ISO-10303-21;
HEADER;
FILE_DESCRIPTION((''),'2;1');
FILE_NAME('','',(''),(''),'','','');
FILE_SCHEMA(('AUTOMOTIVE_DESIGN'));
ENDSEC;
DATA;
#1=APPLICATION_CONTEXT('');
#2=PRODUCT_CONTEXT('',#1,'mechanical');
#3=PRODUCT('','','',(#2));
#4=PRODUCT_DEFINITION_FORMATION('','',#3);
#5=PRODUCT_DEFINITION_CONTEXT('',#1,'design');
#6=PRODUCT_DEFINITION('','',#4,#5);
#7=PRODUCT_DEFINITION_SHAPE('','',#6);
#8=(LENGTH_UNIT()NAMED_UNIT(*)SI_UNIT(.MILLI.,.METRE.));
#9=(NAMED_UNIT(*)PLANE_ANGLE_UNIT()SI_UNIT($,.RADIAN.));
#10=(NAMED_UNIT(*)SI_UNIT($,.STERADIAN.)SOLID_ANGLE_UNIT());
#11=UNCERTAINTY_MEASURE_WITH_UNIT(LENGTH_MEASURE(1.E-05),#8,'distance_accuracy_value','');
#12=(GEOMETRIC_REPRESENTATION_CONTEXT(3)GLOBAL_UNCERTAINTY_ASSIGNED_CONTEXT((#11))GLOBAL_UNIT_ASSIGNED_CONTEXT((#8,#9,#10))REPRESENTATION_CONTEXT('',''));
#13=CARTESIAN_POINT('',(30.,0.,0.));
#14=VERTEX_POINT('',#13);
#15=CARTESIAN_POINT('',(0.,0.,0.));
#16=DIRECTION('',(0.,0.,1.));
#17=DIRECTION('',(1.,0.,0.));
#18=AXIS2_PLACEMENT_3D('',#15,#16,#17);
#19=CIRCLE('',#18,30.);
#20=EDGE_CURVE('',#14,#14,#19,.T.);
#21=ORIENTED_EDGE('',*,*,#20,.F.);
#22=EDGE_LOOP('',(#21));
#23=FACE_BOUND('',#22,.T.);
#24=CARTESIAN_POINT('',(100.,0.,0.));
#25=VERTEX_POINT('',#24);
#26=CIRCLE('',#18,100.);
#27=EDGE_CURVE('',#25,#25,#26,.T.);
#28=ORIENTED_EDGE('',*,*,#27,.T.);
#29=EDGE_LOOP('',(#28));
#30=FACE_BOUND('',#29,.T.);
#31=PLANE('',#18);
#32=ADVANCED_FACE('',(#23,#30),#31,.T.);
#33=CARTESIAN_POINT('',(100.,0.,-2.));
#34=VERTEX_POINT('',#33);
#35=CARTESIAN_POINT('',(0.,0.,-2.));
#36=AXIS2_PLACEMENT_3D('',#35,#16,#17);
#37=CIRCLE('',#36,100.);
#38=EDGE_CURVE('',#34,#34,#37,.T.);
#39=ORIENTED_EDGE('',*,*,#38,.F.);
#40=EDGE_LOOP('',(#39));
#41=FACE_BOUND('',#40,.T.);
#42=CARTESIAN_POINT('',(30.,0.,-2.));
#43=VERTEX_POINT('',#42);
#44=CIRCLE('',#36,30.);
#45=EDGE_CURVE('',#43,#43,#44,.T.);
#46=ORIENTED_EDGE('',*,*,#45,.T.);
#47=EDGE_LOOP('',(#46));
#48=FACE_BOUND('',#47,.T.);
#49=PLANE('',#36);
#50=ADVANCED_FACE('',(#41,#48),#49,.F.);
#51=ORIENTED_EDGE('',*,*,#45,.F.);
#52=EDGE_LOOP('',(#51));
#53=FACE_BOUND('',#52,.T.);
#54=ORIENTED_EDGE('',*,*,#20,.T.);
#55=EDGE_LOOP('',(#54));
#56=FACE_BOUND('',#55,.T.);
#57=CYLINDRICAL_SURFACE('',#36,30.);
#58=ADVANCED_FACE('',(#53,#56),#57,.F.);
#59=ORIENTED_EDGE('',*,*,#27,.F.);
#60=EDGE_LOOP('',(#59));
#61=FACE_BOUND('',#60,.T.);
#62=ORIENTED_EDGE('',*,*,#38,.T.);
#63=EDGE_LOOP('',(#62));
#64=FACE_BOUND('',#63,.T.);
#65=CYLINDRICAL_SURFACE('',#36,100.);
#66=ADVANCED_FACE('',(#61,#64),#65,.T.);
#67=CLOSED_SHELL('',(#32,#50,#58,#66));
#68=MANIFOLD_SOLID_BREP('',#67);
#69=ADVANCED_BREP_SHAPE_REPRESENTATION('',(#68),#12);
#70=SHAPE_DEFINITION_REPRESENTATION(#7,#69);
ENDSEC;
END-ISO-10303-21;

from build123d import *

# Parameters (mm, degrees)
SKETCH1_R          = 100
SKETCH1_R_2        = 30
BASE_FLANGE1_DEPTH = 2


# Sheet-metal steps are written as plain solids
with BuildPart() as part:
    # Sketch1 → Base-Flange1 (new body)
    with BuildSketch(Plane.XY):
        Circle(SKETCH1_R)
        Circle(SKETCH1_R_2, mode=Mode.SUBTRACT)
    extrude(amount=-BASE_FLANGE1_DEPTH)


solid = part.part
